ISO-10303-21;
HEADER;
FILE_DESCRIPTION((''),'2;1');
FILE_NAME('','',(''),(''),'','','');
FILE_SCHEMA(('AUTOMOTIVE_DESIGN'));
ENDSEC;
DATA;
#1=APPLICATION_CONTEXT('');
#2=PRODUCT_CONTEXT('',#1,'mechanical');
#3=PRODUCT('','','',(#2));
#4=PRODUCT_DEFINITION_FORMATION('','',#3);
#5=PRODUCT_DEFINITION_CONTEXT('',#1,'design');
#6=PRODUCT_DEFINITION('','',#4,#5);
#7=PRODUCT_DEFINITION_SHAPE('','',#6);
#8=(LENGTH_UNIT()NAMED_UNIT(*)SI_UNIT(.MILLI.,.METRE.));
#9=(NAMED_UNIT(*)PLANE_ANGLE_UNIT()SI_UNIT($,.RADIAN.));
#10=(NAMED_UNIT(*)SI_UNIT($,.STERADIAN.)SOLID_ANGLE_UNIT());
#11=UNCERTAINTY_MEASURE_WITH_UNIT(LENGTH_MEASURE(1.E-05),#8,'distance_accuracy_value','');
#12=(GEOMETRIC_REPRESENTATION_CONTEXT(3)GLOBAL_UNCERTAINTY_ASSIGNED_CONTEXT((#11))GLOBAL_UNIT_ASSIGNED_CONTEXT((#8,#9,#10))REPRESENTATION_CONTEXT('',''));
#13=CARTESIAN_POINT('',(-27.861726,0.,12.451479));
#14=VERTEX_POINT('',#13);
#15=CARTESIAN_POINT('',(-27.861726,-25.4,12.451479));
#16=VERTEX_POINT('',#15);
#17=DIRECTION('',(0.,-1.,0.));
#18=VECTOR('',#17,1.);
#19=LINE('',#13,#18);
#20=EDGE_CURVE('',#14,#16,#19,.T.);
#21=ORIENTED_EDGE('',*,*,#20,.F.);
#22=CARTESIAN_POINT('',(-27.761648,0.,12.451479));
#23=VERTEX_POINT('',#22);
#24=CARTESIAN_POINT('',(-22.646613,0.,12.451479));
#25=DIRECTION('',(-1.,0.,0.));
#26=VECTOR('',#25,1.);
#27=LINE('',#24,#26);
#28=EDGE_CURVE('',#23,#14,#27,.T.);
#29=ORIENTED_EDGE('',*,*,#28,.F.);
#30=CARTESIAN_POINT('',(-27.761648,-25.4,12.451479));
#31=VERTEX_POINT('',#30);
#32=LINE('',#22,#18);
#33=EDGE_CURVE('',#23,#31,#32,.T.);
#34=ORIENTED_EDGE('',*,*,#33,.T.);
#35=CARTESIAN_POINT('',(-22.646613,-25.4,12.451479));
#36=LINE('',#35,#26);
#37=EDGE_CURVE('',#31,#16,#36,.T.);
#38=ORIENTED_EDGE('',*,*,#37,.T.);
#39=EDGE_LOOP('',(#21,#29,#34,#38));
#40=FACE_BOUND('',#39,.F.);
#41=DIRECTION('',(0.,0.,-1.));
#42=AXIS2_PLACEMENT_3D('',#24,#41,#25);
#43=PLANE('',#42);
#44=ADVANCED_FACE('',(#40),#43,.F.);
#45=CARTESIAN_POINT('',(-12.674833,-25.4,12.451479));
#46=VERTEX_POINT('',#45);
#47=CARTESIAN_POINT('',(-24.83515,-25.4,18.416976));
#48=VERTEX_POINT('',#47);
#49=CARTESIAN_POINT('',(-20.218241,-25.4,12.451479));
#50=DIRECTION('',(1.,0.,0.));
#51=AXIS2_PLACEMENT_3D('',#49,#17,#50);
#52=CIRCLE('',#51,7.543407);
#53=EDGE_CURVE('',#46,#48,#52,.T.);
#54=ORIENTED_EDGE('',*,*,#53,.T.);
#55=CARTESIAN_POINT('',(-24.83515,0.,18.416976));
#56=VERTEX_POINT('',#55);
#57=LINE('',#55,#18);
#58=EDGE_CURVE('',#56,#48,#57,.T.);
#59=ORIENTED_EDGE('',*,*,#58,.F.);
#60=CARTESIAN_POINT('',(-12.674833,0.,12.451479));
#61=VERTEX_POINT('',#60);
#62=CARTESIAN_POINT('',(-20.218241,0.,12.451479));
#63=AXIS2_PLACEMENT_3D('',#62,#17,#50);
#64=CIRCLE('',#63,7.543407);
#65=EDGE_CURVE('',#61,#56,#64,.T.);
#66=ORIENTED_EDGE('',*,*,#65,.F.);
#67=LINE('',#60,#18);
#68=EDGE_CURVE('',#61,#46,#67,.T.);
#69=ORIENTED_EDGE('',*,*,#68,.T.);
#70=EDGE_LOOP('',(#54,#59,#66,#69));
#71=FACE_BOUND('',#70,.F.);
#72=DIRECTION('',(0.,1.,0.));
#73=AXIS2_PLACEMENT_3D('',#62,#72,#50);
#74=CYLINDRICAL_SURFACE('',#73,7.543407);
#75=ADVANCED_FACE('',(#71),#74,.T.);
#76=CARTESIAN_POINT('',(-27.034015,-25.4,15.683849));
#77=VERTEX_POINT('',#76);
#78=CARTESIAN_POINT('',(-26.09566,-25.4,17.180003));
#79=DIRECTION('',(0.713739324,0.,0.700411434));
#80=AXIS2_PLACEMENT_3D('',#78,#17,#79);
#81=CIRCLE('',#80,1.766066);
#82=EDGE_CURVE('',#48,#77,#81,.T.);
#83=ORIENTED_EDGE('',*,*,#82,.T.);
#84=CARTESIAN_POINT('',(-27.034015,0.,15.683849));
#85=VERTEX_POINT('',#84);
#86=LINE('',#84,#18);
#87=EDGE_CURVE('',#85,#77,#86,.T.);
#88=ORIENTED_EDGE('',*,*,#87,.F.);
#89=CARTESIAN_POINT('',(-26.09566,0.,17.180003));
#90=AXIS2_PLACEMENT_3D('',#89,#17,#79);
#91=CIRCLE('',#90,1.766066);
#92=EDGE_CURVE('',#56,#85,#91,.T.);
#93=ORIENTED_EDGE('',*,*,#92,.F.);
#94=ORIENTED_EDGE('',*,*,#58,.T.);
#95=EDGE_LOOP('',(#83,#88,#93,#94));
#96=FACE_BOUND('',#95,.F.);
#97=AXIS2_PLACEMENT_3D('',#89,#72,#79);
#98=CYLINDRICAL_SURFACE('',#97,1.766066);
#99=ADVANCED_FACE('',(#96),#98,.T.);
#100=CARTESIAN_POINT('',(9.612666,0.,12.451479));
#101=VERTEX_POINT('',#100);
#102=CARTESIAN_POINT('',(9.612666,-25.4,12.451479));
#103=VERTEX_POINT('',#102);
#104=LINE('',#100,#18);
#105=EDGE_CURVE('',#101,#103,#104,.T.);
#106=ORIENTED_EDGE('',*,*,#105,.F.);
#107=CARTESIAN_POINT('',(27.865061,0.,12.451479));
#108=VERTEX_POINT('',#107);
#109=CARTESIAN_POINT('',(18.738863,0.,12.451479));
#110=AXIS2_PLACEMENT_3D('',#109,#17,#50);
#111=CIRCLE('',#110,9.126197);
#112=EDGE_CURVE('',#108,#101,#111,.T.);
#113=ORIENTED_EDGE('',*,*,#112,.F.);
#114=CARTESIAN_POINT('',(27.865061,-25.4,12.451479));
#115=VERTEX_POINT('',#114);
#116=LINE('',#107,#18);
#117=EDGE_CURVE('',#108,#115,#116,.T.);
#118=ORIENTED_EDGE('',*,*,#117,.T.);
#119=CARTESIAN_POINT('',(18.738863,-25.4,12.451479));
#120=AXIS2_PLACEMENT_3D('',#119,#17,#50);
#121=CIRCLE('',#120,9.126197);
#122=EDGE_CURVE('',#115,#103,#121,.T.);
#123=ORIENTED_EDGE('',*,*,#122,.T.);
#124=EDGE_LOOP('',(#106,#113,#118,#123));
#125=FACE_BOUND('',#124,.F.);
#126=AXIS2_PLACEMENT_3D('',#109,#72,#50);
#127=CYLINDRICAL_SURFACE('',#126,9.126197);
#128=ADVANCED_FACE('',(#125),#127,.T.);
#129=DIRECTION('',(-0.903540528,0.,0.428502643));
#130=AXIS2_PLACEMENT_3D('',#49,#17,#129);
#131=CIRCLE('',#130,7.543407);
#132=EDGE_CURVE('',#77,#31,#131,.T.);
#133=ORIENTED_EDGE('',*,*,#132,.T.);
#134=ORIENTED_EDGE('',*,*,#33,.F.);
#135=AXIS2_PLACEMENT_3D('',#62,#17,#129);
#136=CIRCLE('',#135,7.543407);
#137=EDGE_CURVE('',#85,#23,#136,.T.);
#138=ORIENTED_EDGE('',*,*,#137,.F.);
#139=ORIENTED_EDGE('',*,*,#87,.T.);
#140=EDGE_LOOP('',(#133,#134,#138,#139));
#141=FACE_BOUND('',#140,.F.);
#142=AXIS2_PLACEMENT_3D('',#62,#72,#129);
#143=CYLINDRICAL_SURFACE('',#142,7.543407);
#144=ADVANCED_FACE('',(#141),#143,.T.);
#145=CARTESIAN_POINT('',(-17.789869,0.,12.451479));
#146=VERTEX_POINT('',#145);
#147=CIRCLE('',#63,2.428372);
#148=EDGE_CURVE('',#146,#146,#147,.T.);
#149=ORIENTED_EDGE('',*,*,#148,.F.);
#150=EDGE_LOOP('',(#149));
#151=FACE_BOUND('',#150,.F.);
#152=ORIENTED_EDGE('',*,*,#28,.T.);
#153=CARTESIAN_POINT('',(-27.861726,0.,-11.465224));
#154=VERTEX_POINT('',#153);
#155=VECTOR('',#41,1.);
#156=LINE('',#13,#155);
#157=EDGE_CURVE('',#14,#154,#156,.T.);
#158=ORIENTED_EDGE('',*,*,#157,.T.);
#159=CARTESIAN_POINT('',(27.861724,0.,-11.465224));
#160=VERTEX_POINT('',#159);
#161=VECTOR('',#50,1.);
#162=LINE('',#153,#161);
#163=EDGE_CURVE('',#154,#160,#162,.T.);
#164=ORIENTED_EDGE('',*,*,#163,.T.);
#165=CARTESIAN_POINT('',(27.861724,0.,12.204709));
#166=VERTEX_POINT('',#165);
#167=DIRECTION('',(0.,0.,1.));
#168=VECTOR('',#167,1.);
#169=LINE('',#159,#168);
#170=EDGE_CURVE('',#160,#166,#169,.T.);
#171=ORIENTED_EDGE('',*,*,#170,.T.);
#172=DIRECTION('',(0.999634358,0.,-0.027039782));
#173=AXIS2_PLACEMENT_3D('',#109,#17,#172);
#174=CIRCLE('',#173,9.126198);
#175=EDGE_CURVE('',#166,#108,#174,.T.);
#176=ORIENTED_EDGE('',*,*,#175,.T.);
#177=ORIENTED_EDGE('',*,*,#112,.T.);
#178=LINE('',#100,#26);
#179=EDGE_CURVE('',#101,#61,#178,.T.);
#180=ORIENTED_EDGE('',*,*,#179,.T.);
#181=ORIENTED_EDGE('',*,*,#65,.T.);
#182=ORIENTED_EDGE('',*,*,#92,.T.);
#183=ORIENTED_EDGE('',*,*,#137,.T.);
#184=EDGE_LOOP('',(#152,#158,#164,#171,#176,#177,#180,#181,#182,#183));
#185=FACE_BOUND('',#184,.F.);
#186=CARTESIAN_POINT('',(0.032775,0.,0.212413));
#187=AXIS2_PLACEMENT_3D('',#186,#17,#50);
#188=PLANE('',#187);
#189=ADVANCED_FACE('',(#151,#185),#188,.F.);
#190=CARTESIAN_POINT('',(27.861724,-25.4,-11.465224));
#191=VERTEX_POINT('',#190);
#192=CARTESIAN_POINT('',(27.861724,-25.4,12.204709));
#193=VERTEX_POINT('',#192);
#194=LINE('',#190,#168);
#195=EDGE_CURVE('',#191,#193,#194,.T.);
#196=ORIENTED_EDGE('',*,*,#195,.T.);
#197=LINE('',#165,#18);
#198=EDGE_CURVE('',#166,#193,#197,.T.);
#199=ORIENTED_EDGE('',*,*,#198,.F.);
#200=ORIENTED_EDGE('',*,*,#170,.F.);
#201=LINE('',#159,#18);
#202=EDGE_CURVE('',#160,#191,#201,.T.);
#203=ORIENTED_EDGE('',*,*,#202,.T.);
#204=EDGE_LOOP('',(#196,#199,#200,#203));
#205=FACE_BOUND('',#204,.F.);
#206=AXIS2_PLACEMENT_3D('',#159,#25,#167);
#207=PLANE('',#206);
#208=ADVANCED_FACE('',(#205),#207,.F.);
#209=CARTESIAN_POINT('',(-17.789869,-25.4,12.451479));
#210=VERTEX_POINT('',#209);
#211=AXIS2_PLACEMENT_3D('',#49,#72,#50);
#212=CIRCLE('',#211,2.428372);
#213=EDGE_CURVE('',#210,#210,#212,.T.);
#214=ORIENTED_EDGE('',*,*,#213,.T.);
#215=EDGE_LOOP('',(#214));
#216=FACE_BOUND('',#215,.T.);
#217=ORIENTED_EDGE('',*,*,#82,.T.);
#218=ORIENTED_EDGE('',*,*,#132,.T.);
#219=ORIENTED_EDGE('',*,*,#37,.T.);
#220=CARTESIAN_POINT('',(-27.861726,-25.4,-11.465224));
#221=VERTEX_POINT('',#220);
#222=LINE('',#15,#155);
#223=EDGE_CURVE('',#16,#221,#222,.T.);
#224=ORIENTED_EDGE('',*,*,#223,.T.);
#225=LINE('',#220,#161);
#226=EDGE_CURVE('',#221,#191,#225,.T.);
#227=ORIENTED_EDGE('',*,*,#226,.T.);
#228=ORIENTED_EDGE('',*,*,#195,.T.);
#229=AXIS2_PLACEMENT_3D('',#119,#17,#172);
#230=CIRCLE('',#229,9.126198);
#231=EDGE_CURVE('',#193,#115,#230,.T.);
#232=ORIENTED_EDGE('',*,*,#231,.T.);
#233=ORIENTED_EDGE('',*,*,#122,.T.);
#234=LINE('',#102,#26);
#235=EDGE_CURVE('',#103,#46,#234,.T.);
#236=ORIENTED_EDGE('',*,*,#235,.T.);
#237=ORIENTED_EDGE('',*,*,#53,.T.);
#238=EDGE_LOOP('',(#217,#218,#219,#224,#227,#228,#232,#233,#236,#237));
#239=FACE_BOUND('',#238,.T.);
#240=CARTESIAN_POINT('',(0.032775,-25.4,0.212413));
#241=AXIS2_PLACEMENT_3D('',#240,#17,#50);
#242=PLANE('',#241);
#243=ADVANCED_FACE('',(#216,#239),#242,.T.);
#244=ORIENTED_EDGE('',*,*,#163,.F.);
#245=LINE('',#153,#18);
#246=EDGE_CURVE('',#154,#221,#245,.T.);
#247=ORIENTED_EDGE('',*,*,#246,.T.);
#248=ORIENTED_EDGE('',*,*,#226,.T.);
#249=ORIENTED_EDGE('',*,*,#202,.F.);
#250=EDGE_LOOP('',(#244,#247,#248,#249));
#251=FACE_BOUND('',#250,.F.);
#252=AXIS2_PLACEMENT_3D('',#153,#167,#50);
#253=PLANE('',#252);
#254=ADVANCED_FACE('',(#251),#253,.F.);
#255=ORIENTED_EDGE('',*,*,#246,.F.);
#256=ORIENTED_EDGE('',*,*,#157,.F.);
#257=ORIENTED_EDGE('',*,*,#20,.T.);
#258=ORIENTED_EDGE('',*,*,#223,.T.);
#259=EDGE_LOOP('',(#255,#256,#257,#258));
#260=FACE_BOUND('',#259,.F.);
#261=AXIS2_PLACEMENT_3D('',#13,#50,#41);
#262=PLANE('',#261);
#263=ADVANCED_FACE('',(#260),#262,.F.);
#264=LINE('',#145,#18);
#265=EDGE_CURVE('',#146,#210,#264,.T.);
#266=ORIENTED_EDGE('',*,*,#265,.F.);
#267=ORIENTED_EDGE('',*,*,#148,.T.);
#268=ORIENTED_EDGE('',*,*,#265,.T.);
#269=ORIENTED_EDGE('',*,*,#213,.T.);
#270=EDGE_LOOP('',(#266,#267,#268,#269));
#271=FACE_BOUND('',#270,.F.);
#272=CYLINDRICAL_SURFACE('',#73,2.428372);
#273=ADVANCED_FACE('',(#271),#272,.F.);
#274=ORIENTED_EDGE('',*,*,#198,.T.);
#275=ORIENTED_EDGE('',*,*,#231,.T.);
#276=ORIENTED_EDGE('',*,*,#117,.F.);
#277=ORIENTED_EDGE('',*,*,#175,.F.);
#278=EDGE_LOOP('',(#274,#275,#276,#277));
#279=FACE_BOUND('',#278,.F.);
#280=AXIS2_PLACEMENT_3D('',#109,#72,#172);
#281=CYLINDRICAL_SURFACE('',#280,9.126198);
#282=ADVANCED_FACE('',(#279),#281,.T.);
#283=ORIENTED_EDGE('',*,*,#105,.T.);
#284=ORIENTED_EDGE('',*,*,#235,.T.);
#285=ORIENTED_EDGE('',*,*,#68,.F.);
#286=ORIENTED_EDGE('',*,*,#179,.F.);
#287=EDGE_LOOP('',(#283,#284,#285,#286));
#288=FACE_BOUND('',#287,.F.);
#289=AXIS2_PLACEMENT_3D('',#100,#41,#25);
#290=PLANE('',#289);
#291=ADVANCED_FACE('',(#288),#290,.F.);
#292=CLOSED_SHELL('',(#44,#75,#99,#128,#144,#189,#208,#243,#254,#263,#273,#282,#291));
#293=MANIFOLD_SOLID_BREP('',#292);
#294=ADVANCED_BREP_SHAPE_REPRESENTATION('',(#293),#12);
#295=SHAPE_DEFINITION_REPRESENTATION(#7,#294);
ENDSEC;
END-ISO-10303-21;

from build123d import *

# Parameters (mm, degrees)
F1_DEPTH = 25.4
F3_DEPTH = 25.4


# Not quite as in the source:
# - the program builds the solid bodies; features that only make, move or delete a surface that nothing else refers to are left out


with BuildPart() as f1:
    # F0 (on Front) → F1 (new body)
    with BuildSketch(Plane.XZ):
        with BuildLine():
            Line((9.6126659133, 12.4514792114), (-12.6748333757, 12.4514792114))
            ThreePointArc((-12.6748333757, 12.4514792114), (-20.2182408326, 4.9080717545), (-27.7616482896, 12.4514792114))
            Line((-27.7616482896, 12.4514792114), (-27.861725539, 12.4514792114))
            Line((-27.861725539, 12.4514792114), (-27.861725539, -11.4652235061))
            Line((-27.861725539, -11.4652235061), (27.8617236763, -11.4652235061))
            Line((27.8617236763, -11.4652235061), (27.8617236763, 12.2047088224))
            ThreePointArc((27.8617236763, 12.2047088224), (18.6154667795, 3.3261161383), (9.6126659133, 12.4514792114))
        make_face()
        with BuildLine():
            Line((-12.6748333757, 12.4514792114), (-17.7898686341, 12.4514792114))
            ThreePointArc((-17.7898686341, 12.4514792114), (-20.2182408326, 10.0231070129), (-22.6466130312, 12.4514792114))
            Line((-22.6466130312, 12.4514792114), (-27.7616482896, 12.4514792114))
            ThreePointArc((-27.7616482896, 12.4514792114), (-20.2182408326, 4.9080717545), (-12.6748333757, 12.4514792114))
        make_face()
    extrude(amount=F1_DEPTH)

    # F0 (on Front) → F3 (join)
    with BuildSketch(Plane.XZ):
        with BuildLine():
            ThreePointArc((-22.6466130312, 12.4514792114), (-20.2182408326, 14.87985141), (-17.7898686341, 12.4514792114))
            Line((-17.7898686341, 12.4514792114), (-12.6748333757, 12.4514792114))
            ThreePointArc((-12.6748333757, 12.4514792114), (-16.8959093658, 19.2238576479), (-24.8351495055, 18.4169758688))
            ThreePointArc((-24.8351495055, 18.4169758688), (-24.460861538, 17.8481513463), (-24.3295943797, 17.1800033439))
            ThreePointArc((-24.3295943797, 17.1800033439), (-25.2407357632, 15.634657994), (-27.0340151871, 15.6838492415))
            ThreePointArc((-27.0340151871, 15.6838492415), (-27.5774921245, 14.1081072584), (-27.7616482896, 12.4514792114))
            Line((-27.7616482896, 12.4514792114), (-22.6466130312, 12.4514792114))
        make_face()
        with BuildLine():
            Line((-12.6748333757, 12.4514792114), (-17.7898686341, 12.4514792114))
            ThreePointArc((-17.7898686341, 12.4514792114), (-20.2182408326, 10.0231070129), (-22.6466130312, 12.4514792114))
            Line((-22.6466130312, 12.4514792114), (-27.7616482896, 12.4514792114))
            ThreePointArc((-27.7616482896, 12.4514792114), (-20.2182408326, 4.9080717545), (-12.6748333757, 12.4514792114))
        make_face()
        with BuildLine():
            Line((9.6126659133, 12.4514792114), (-12.6748333757, 12.4514792114))
            ThreePointArc((-12.6748333757, 12.4514792114), (-20.2182408326, 4.9080717545), (-27.7616482896, 12.4514792114))
            Line((-27.7616482896, 12.4514792114), (-27.861725539, 12.4514792114))
            Line((-27.861725539, 12.4514792114), (-27.861725539, -11.4652235061))
            Line((-27.861725539, -11.4652235061), (27.8617236763, -11.4652235061))
            Line((27.8617236763, -11.4652235061), (27.8617236763, 12.2047088224))
            ThreePointArc((27.8617236763, 12.2047088224), (18.6154667795, 3.3261161383), (9.6126659133, 12.4514792114))
        make_face()
        with BuildLine():
            ThreePointArc((27.8650605952, 12.4514792114), (18.7388632542, 21.5776765524), (9.6126659133, 12.4514792114))
            Line((9.6126659133, 12.4514792114), (27.8617236763, 12.4514792114))
            Line((27.8617236763, 12.4514792114), (27.8617236763, 12.2047088224))
            ThreePointArc((27.8617236763, 12.2047088224), (27.8642263273, 12.3280827367), (27.8650605952, 12.4514792114))
        make_face()
        with BuildLine():
            Line((27.8617236763, 12.4514792114), (9.6126659133, 12.4514792114))
            ThreePointArc((9.6126659133, 12.4514792114), (18.6154667795, 3.3261161383), (27.8617236763, 12.2047088224))
            Line((27.8617236763, 12.2047088224), (27.8617236763, 12.4514792114))
        make_face()
        with BuildLine():
            ThreePointArc((-24.3295943797, 17.1800033439), (-24.460861538, 17.8481513463), (-24.8351495055, 18.4169758688))
            ThreePointArc((-24.8351495055, 18.4169758688), (-26.0956599593, 17.1800033439), (-27.0340151871, 15.6838492415))
            ThreePointArc((-27.0340151871, 15.6838492415), (-25.2407357632, 15.634657994), (-24.3295943797, 17.1800033439))
        make_face()
        with BuildLine():
            ThreePointArc((-27.0340151871, 15.6838492415), (-26.0956599593, 17.1800033439), (-24.8351495055, 18.4169758688))
            ThreePointArc((-24.8351495055, 18.4169758688), (-27.4716836828, 18.2870473105), (-27.0340151871, 15.6838492415))
        make_face()
    extrude(amount=F3_DEPTH)


solid = f1.part
